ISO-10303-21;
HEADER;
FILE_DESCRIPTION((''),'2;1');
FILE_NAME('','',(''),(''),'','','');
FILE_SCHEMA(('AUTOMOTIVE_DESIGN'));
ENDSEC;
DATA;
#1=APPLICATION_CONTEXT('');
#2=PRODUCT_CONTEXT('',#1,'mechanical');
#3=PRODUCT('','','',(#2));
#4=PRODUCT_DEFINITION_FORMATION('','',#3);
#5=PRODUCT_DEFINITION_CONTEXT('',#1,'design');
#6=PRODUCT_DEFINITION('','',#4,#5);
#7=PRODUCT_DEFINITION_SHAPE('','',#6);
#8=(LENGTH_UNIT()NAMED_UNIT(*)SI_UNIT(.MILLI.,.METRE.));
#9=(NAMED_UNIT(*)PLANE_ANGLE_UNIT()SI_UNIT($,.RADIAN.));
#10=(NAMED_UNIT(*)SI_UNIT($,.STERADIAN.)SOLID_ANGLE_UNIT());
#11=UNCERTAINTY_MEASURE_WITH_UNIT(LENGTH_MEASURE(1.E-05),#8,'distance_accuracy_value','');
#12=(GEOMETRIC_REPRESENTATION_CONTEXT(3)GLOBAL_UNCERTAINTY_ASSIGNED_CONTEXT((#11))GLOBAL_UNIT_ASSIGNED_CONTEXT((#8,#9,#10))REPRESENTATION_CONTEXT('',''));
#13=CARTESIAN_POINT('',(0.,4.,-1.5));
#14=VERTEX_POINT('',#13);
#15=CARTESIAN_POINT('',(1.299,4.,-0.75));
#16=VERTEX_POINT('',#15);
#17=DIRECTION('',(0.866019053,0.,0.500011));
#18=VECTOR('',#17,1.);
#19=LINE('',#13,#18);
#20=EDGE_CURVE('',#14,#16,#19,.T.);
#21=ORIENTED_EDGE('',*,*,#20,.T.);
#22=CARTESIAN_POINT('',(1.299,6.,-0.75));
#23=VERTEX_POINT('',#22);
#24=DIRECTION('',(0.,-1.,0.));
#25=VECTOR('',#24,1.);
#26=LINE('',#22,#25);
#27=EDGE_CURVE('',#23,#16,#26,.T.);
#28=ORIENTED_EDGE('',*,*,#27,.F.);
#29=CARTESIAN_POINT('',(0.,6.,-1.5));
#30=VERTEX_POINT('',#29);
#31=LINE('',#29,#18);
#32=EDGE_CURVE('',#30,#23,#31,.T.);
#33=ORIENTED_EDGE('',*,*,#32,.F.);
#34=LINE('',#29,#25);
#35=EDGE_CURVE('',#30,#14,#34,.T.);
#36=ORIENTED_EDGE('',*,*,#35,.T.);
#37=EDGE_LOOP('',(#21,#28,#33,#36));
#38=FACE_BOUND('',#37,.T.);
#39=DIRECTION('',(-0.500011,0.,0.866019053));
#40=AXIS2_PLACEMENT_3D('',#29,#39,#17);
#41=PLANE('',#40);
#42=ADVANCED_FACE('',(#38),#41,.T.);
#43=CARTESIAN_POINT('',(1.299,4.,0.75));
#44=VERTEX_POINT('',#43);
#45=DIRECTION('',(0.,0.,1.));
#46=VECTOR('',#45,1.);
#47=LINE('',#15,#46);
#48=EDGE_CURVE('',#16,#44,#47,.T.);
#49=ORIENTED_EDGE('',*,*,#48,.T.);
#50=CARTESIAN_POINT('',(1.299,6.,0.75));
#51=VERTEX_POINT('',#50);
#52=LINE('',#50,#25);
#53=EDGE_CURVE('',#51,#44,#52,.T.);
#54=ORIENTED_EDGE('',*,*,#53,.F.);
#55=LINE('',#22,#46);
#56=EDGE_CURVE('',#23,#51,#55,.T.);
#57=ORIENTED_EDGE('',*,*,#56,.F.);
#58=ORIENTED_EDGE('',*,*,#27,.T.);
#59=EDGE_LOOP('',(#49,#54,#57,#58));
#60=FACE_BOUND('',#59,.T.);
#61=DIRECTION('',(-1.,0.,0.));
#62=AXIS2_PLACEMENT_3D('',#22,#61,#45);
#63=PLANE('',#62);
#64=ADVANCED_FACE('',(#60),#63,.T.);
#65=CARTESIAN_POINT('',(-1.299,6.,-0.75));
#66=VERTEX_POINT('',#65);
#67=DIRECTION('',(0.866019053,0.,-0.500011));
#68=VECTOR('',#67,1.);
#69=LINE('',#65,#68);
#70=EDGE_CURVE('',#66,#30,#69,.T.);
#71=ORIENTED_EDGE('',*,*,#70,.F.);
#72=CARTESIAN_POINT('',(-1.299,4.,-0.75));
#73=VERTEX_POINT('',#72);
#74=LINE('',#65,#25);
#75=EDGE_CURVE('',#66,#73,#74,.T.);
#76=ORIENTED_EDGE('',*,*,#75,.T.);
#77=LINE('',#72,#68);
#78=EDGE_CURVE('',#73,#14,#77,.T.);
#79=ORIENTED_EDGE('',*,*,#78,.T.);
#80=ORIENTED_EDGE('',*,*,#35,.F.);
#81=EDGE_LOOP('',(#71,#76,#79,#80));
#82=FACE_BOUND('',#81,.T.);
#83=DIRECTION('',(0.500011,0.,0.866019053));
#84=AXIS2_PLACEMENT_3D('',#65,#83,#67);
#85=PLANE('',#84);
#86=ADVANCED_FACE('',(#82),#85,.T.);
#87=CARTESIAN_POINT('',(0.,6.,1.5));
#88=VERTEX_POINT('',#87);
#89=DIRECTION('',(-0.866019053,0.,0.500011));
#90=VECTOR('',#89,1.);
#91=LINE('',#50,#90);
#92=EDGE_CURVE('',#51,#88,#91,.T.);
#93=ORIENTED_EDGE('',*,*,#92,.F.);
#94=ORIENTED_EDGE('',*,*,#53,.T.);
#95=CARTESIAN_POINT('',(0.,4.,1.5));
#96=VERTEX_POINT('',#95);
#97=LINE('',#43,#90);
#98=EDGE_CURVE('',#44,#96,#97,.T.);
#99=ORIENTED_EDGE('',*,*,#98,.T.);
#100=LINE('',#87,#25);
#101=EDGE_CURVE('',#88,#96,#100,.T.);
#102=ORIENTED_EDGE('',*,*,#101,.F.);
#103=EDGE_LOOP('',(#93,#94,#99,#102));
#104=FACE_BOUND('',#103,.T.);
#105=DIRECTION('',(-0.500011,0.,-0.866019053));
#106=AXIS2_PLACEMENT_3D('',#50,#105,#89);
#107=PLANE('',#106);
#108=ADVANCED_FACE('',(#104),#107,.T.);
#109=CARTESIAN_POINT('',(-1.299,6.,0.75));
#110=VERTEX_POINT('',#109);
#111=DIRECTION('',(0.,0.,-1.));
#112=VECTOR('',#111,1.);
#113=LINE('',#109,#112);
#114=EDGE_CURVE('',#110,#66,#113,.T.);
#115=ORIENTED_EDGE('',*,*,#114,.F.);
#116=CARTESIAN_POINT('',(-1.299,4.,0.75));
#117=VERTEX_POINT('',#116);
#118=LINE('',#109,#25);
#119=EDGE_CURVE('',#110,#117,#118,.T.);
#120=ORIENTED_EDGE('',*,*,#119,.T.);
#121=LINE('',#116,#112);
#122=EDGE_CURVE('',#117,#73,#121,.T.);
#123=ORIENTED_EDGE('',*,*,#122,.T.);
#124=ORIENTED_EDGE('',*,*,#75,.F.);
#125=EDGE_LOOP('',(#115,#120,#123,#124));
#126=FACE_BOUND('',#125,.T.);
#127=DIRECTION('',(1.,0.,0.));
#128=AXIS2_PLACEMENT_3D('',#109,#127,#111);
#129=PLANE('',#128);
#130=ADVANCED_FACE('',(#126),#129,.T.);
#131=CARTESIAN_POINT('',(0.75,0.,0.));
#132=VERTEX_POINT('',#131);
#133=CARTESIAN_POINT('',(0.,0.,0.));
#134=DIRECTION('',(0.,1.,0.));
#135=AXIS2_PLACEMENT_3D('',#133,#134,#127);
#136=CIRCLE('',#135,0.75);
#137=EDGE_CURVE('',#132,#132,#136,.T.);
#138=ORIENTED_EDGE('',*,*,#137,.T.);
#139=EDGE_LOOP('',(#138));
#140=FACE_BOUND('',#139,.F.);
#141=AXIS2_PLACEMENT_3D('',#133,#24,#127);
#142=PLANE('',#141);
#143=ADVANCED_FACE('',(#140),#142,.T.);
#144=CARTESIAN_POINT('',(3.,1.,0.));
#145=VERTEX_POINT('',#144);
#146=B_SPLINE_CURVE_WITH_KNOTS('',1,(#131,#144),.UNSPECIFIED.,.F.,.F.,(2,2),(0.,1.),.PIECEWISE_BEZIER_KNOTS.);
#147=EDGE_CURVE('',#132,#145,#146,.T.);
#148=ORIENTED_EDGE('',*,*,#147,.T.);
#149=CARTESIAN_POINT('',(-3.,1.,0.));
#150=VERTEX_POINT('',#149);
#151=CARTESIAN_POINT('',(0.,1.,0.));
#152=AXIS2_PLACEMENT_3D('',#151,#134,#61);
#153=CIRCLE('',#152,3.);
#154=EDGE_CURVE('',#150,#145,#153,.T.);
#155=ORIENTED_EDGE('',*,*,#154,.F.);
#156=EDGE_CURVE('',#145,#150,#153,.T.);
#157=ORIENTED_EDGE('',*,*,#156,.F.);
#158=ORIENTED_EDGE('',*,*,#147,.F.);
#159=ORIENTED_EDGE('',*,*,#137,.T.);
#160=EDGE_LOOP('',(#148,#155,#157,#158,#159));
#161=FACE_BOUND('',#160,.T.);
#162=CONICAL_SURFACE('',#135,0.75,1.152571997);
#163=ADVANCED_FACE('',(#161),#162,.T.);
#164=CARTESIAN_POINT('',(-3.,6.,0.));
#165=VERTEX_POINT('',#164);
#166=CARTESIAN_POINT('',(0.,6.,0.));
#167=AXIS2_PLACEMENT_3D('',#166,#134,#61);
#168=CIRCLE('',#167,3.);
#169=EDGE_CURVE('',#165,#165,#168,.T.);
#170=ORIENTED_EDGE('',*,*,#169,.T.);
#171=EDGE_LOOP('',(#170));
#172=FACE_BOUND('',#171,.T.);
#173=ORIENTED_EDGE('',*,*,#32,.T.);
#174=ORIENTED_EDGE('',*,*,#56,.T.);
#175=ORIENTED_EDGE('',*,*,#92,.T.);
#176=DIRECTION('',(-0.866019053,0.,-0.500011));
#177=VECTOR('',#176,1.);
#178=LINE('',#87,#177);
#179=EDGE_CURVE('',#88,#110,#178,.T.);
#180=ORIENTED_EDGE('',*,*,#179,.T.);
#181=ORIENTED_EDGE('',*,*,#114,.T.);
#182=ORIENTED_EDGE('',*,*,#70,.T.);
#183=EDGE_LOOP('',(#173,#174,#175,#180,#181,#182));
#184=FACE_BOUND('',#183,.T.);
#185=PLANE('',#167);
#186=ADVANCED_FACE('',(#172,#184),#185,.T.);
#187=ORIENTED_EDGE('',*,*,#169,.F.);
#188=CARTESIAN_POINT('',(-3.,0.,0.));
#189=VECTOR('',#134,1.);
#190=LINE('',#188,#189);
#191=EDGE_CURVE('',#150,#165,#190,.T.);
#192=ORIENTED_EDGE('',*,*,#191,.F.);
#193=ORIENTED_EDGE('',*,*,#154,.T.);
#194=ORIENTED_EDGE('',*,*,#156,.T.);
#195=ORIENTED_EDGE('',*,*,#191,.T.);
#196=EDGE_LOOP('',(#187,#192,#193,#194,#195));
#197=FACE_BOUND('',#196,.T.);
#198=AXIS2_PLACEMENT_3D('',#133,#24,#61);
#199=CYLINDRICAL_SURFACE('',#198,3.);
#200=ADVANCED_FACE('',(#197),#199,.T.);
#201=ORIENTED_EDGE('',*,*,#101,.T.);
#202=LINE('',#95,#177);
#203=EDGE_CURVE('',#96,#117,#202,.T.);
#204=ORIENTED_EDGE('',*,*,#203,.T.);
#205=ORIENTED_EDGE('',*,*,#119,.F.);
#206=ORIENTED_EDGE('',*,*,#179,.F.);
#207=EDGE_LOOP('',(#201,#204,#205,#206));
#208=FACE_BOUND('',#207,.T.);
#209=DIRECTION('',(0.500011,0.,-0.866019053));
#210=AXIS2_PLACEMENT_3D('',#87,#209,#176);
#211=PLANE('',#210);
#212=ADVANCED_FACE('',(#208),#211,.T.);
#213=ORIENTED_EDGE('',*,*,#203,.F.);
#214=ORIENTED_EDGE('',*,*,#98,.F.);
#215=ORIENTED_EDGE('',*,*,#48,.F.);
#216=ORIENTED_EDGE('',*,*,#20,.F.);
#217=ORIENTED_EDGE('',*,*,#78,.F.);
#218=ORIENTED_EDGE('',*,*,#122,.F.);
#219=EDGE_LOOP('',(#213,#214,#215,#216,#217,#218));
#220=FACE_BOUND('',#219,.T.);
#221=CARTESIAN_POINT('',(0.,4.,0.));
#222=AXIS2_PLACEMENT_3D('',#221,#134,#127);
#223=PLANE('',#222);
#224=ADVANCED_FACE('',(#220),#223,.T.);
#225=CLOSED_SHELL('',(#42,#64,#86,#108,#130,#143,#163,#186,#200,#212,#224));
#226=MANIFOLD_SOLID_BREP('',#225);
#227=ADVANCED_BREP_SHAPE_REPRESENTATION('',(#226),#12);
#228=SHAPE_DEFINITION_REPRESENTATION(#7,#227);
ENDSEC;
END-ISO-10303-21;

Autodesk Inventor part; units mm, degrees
ref_plane "YZ Plane" through (0, 0, 0) normal (1, 0, 0) x (0, 1, 0)
ref_plane "XZ Plane" through (0, 0, 0) normal (0, 1, 0) x (-1, 0, 0)
ref_plane "XY Plane" through (0, 0, 0) normal (0, 0, 1) x (1, 0, 0)
sketch "Sketch1" plane through (0, 0, 0) normal (0, 1, 0) x (-1, 0, 0)
  circle A0 centre (0, 0) radius 3
  dimension "d0" = 6
extrude "Extrusion1" add sketch "Sketch1" along normal blind 6
sketch "Sketch2" plane through (0, 0, 0) normal (0, -1, 0) x (1, 0, 0)
  circle A0 centre (0, 0) radius 0.75
  circle A1 centre (0, 0) radius 3
  dimension "d3" = 1.5
extrude "Extrusion2" cut sketch "Sketch2" against normal blind 1
loft "Loft1" add section 1 edges at (-0.75, 0, 0) section 2 edges at (3, 1, 0)
thread "Thread1" size "M6x0.75" class "6g" standard "ANSI Metric M Profile" full length
sketch "Sketch3" plane through (0, 6, 0) normal (0, 1, 0) x (1, 0, 0)
  line L0 (0, 0) -> (0, 1.5)
  line L1 (0, 1.5) -> (1.299, 0.75)
  line L2 (1.299, 0.75) -> (1.299, -0.75)
  line L3 (1.299, -0.75) -> (0, -1.5)
  line L4 (0, -1.5) -> (-1.299, -0.75)
  line L5 (-1.299, -0.75) -> (-1.299, 0.75)
  line L6 (-1.299, 0.75) -> (0, 1.5)
  dimension "d12" = 1.5
extrude "Extrusion3" cut sketch "Sketch3" against normal blind 2
properties part number "M6x6_DIN914" material "Steel, Mild"
